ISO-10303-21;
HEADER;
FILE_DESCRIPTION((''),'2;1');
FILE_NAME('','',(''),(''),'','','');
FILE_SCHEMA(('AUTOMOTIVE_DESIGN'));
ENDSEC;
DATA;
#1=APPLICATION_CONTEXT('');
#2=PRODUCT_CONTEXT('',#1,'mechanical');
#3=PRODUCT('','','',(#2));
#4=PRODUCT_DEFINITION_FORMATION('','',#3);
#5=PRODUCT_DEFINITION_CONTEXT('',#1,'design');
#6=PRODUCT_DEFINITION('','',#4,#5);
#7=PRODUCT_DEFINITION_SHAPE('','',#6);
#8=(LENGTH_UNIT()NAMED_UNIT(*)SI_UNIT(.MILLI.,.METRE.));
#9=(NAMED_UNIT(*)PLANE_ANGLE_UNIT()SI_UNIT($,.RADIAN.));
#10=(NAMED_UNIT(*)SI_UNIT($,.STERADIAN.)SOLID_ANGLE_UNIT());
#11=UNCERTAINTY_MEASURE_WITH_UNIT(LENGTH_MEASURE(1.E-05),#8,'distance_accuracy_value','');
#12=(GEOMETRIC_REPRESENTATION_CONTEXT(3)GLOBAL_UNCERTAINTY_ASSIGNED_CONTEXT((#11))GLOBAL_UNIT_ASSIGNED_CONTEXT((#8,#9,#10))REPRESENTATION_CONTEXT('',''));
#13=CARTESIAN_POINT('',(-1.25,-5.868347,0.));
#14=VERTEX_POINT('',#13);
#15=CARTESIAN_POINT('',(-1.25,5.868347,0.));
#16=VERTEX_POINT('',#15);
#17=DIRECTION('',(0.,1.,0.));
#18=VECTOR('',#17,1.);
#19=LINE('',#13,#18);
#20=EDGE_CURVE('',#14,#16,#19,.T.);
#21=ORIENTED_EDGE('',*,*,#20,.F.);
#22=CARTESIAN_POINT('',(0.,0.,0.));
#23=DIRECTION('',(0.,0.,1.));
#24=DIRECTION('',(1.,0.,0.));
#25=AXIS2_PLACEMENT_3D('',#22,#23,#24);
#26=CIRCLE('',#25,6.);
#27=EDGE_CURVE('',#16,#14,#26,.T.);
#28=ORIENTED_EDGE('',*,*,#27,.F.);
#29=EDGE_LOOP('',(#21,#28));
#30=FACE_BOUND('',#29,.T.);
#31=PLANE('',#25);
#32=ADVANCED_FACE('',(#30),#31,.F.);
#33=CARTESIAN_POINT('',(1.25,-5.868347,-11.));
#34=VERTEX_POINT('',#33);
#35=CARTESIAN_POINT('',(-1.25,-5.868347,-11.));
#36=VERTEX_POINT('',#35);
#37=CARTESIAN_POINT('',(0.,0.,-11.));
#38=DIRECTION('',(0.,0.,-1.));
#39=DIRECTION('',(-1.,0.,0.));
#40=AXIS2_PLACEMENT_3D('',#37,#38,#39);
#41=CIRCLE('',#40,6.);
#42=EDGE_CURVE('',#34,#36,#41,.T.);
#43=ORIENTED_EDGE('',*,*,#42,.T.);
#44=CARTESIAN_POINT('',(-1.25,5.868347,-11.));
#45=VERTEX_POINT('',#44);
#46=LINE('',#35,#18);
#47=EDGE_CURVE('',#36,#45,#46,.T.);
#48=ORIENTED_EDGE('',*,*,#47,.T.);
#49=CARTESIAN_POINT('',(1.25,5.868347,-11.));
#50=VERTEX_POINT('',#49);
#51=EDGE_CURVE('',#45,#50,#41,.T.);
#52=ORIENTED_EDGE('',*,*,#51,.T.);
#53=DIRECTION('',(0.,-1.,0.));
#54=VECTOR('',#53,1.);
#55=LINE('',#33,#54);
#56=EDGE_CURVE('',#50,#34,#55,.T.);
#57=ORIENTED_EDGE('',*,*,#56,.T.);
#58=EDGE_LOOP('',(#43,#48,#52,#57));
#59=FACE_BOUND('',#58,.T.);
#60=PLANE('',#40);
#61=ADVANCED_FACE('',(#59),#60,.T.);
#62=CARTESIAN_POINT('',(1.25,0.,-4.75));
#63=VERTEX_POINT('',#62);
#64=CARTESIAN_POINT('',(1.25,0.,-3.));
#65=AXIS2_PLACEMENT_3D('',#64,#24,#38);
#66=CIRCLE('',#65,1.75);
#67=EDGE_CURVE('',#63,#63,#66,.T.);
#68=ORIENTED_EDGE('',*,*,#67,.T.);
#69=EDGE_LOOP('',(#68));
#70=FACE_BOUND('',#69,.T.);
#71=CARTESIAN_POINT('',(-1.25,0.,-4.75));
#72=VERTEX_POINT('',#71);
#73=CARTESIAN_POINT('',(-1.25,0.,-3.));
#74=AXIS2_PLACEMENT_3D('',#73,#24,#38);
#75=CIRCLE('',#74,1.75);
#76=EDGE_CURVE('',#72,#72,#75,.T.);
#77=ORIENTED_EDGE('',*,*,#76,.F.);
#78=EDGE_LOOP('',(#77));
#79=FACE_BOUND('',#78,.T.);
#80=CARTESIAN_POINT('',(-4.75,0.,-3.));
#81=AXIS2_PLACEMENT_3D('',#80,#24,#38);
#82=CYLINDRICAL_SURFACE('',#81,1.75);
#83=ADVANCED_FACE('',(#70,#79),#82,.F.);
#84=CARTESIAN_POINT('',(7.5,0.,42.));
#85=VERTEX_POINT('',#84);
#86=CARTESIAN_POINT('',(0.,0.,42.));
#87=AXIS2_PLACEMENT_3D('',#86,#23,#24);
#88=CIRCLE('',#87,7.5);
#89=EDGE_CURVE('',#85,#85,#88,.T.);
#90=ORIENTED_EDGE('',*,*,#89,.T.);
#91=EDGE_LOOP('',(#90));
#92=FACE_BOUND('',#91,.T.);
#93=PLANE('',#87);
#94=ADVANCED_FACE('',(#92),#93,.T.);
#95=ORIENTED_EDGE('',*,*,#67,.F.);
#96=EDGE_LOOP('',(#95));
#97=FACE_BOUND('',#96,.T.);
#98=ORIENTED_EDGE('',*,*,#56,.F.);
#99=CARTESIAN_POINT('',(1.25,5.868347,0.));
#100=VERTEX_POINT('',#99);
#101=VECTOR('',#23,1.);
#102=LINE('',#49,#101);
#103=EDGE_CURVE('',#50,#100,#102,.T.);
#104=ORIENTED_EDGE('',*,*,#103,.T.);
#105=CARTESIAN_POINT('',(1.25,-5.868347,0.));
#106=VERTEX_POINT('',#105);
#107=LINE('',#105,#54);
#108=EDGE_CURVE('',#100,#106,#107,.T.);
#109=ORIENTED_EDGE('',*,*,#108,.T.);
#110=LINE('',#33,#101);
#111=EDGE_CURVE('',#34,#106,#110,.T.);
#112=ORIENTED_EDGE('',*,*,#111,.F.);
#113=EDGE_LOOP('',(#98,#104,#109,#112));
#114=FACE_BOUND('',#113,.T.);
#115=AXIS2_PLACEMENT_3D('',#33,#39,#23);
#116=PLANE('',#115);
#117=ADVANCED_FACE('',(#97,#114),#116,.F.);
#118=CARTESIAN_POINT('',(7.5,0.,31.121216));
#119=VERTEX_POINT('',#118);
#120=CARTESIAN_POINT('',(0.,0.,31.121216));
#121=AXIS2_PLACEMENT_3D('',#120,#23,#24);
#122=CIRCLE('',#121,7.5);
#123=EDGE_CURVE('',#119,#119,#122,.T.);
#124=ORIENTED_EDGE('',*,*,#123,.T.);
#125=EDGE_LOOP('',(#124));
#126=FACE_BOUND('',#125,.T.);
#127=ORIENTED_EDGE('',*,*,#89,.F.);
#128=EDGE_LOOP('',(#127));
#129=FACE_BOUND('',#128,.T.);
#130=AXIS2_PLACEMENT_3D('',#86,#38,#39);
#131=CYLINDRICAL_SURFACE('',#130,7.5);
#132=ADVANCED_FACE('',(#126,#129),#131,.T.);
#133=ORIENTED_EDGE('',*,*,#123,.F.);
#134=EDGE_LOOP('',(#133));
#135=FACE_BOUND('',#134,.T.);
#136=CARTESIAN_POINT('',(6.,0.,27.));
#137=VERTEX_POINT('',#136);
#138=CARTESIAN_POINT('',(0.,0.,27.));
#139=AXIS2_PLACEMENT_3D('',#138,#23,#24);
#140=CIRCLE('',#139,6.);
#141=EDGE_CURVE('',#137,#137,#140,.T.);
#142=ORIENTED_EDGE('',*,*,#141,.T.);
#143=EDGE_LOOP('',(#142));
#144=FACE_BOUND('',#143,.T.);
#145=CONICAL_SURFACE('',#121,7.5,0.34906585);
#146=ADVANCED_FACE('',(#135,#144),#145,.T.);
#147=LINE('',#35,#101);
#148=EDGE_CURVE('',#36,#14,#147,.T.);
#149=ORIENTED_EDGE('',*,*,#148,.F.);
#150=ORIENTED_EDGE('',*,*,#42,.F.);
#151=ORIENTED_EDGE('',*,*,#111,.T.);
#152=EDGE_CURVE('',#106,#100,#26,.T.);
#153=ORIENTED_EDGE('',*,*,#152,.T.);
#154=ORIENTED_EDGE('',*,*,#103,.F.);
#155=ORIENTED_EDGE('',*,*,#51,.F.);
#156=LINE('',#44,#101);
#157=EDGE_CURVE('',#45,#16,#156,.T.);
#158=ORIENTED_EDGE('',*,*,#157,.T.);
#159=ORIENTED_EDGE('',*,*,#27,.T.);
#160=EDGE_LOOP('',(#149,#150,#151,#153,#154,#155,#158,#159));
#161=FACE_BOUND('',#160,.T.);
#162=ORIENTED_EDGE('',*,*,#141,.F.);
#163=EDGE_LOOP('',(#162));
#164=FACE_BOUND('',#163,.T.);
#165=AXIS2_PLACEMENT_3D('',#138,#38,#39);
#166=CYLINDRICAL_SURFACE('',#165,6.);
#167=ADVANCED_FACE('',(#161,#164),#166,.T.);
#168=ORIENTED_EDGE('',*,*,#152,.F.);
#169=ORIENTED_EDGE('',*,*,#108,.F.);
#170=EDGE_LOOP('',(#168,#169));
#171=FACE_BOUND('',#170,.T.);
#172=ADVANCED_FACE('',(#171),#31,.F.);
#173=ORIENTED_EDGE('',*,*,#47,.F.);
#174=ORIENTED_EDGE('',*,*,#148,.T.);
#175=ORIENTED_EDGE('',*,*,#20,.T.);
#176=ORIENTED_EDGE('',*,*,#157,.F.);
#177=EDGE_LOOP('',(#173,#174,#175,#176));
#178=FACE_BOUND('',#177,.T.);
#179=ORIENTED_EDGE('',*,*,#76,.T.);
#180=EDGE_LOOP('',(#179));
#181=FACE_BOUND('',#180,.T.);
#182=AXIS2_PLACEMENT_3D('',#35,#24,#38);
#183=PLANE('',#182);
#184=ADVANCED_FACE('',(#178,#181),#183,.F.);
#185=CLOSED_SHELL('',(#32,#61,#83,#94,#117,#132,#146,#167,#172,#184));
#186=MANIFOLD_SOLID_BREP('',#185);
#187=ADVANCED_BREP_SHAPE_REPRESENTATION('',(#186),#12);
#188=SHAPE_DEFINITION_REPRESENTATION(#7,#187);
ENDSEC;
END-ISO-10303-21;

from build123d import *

# Parameters (mm, degrees)
SKETCH1_R           = 6
BOSS_EXTRUDE1_DEPTH = 27
BOSS_EXTRUDE2_START = 11
BOSS_EXTRUDE2_DEPTH = 11
SKETCH3_R           = 1.75
CUT_EXTRUDE1_DEPTH  = 6
SKETCH4_R           = 7.5
BOSS_EXTRUDE3_DEPTH = 15
CHAMFER1_SIZE2      = 1.5
CHAMFER1_SIZE       = 4.121216129


with BuildPart() as part:
    # Sketch1 → Boss-Extrude1 (new body)
    with BuildSketch(Plane.XY):
        Circle(SKETCH1_R)
    extrude(amount=BOSS_EXTRUDE1_DEPTH)

    # Sketch2 → Boss-Extrude2 (add)
    with BuildSketch(Plane(origin=(0, 0, 0), x_dir=(-1, 0, 0), z_dir=(0, 0, -1)).offset(BOSS_EXTRUDE2_START)):
        with BuildLine():
            Line((-1.25, -5.868347297), (-1.25, 5.868347297))
            ThreePointArc((-1.25, 5.868347297), (0, 6), (1.25, 5.868347297))
            Line((1.25, 5.868347297), (1.25, -5.868347297))
            ThreePointArc((1.25, -5.868347297), (0, -6), (-1.25, -5.868347297))
        make_face()
    extrude(amount=-BOSS_EXTRUDE2_DEPTH)

    # Sketch3 → Cut-Extrude1 (cut)
    with BuildSketch(Plane(origin=(1.25, 0, 0), x_dir=(0, 0, -1), z_dir=(1, 0, 0))):
        with Locations((3, 0)):
            Circle(SKETCH3_R)
    extrude(amount=-CUT_EXTRUDE1_DEPTH, mode=Mode.SUBTRACT)

    # Sketch4 → Boss-Extrude3 (add)
    with BuildSketch(Plane.XY.offset(27)):
        Circle(SKETCH4_R)
    extrude(amount=BOSS_EXTRUDE3_DEPTH)

    # Chamfer1
    chamfer1_edges = [part.edges().sort_by_distance(p)[0] for p in [
        (-7.5, 0, 27),
    ]]
    chamfer1_side = [part.faces().sort_by_distance(p)[0] for p in [
        (-7.5, 0, 27.03),
    ]]
    chamfer(chamfer1_edges, length=CHAMFER1_SIZE - 0.0001, length2=CHAMFER1_SIZE2 - 0.0001, reference=chamfer1_side[0])  # a hair under: the kernel refuses the full size


solid = part.part
